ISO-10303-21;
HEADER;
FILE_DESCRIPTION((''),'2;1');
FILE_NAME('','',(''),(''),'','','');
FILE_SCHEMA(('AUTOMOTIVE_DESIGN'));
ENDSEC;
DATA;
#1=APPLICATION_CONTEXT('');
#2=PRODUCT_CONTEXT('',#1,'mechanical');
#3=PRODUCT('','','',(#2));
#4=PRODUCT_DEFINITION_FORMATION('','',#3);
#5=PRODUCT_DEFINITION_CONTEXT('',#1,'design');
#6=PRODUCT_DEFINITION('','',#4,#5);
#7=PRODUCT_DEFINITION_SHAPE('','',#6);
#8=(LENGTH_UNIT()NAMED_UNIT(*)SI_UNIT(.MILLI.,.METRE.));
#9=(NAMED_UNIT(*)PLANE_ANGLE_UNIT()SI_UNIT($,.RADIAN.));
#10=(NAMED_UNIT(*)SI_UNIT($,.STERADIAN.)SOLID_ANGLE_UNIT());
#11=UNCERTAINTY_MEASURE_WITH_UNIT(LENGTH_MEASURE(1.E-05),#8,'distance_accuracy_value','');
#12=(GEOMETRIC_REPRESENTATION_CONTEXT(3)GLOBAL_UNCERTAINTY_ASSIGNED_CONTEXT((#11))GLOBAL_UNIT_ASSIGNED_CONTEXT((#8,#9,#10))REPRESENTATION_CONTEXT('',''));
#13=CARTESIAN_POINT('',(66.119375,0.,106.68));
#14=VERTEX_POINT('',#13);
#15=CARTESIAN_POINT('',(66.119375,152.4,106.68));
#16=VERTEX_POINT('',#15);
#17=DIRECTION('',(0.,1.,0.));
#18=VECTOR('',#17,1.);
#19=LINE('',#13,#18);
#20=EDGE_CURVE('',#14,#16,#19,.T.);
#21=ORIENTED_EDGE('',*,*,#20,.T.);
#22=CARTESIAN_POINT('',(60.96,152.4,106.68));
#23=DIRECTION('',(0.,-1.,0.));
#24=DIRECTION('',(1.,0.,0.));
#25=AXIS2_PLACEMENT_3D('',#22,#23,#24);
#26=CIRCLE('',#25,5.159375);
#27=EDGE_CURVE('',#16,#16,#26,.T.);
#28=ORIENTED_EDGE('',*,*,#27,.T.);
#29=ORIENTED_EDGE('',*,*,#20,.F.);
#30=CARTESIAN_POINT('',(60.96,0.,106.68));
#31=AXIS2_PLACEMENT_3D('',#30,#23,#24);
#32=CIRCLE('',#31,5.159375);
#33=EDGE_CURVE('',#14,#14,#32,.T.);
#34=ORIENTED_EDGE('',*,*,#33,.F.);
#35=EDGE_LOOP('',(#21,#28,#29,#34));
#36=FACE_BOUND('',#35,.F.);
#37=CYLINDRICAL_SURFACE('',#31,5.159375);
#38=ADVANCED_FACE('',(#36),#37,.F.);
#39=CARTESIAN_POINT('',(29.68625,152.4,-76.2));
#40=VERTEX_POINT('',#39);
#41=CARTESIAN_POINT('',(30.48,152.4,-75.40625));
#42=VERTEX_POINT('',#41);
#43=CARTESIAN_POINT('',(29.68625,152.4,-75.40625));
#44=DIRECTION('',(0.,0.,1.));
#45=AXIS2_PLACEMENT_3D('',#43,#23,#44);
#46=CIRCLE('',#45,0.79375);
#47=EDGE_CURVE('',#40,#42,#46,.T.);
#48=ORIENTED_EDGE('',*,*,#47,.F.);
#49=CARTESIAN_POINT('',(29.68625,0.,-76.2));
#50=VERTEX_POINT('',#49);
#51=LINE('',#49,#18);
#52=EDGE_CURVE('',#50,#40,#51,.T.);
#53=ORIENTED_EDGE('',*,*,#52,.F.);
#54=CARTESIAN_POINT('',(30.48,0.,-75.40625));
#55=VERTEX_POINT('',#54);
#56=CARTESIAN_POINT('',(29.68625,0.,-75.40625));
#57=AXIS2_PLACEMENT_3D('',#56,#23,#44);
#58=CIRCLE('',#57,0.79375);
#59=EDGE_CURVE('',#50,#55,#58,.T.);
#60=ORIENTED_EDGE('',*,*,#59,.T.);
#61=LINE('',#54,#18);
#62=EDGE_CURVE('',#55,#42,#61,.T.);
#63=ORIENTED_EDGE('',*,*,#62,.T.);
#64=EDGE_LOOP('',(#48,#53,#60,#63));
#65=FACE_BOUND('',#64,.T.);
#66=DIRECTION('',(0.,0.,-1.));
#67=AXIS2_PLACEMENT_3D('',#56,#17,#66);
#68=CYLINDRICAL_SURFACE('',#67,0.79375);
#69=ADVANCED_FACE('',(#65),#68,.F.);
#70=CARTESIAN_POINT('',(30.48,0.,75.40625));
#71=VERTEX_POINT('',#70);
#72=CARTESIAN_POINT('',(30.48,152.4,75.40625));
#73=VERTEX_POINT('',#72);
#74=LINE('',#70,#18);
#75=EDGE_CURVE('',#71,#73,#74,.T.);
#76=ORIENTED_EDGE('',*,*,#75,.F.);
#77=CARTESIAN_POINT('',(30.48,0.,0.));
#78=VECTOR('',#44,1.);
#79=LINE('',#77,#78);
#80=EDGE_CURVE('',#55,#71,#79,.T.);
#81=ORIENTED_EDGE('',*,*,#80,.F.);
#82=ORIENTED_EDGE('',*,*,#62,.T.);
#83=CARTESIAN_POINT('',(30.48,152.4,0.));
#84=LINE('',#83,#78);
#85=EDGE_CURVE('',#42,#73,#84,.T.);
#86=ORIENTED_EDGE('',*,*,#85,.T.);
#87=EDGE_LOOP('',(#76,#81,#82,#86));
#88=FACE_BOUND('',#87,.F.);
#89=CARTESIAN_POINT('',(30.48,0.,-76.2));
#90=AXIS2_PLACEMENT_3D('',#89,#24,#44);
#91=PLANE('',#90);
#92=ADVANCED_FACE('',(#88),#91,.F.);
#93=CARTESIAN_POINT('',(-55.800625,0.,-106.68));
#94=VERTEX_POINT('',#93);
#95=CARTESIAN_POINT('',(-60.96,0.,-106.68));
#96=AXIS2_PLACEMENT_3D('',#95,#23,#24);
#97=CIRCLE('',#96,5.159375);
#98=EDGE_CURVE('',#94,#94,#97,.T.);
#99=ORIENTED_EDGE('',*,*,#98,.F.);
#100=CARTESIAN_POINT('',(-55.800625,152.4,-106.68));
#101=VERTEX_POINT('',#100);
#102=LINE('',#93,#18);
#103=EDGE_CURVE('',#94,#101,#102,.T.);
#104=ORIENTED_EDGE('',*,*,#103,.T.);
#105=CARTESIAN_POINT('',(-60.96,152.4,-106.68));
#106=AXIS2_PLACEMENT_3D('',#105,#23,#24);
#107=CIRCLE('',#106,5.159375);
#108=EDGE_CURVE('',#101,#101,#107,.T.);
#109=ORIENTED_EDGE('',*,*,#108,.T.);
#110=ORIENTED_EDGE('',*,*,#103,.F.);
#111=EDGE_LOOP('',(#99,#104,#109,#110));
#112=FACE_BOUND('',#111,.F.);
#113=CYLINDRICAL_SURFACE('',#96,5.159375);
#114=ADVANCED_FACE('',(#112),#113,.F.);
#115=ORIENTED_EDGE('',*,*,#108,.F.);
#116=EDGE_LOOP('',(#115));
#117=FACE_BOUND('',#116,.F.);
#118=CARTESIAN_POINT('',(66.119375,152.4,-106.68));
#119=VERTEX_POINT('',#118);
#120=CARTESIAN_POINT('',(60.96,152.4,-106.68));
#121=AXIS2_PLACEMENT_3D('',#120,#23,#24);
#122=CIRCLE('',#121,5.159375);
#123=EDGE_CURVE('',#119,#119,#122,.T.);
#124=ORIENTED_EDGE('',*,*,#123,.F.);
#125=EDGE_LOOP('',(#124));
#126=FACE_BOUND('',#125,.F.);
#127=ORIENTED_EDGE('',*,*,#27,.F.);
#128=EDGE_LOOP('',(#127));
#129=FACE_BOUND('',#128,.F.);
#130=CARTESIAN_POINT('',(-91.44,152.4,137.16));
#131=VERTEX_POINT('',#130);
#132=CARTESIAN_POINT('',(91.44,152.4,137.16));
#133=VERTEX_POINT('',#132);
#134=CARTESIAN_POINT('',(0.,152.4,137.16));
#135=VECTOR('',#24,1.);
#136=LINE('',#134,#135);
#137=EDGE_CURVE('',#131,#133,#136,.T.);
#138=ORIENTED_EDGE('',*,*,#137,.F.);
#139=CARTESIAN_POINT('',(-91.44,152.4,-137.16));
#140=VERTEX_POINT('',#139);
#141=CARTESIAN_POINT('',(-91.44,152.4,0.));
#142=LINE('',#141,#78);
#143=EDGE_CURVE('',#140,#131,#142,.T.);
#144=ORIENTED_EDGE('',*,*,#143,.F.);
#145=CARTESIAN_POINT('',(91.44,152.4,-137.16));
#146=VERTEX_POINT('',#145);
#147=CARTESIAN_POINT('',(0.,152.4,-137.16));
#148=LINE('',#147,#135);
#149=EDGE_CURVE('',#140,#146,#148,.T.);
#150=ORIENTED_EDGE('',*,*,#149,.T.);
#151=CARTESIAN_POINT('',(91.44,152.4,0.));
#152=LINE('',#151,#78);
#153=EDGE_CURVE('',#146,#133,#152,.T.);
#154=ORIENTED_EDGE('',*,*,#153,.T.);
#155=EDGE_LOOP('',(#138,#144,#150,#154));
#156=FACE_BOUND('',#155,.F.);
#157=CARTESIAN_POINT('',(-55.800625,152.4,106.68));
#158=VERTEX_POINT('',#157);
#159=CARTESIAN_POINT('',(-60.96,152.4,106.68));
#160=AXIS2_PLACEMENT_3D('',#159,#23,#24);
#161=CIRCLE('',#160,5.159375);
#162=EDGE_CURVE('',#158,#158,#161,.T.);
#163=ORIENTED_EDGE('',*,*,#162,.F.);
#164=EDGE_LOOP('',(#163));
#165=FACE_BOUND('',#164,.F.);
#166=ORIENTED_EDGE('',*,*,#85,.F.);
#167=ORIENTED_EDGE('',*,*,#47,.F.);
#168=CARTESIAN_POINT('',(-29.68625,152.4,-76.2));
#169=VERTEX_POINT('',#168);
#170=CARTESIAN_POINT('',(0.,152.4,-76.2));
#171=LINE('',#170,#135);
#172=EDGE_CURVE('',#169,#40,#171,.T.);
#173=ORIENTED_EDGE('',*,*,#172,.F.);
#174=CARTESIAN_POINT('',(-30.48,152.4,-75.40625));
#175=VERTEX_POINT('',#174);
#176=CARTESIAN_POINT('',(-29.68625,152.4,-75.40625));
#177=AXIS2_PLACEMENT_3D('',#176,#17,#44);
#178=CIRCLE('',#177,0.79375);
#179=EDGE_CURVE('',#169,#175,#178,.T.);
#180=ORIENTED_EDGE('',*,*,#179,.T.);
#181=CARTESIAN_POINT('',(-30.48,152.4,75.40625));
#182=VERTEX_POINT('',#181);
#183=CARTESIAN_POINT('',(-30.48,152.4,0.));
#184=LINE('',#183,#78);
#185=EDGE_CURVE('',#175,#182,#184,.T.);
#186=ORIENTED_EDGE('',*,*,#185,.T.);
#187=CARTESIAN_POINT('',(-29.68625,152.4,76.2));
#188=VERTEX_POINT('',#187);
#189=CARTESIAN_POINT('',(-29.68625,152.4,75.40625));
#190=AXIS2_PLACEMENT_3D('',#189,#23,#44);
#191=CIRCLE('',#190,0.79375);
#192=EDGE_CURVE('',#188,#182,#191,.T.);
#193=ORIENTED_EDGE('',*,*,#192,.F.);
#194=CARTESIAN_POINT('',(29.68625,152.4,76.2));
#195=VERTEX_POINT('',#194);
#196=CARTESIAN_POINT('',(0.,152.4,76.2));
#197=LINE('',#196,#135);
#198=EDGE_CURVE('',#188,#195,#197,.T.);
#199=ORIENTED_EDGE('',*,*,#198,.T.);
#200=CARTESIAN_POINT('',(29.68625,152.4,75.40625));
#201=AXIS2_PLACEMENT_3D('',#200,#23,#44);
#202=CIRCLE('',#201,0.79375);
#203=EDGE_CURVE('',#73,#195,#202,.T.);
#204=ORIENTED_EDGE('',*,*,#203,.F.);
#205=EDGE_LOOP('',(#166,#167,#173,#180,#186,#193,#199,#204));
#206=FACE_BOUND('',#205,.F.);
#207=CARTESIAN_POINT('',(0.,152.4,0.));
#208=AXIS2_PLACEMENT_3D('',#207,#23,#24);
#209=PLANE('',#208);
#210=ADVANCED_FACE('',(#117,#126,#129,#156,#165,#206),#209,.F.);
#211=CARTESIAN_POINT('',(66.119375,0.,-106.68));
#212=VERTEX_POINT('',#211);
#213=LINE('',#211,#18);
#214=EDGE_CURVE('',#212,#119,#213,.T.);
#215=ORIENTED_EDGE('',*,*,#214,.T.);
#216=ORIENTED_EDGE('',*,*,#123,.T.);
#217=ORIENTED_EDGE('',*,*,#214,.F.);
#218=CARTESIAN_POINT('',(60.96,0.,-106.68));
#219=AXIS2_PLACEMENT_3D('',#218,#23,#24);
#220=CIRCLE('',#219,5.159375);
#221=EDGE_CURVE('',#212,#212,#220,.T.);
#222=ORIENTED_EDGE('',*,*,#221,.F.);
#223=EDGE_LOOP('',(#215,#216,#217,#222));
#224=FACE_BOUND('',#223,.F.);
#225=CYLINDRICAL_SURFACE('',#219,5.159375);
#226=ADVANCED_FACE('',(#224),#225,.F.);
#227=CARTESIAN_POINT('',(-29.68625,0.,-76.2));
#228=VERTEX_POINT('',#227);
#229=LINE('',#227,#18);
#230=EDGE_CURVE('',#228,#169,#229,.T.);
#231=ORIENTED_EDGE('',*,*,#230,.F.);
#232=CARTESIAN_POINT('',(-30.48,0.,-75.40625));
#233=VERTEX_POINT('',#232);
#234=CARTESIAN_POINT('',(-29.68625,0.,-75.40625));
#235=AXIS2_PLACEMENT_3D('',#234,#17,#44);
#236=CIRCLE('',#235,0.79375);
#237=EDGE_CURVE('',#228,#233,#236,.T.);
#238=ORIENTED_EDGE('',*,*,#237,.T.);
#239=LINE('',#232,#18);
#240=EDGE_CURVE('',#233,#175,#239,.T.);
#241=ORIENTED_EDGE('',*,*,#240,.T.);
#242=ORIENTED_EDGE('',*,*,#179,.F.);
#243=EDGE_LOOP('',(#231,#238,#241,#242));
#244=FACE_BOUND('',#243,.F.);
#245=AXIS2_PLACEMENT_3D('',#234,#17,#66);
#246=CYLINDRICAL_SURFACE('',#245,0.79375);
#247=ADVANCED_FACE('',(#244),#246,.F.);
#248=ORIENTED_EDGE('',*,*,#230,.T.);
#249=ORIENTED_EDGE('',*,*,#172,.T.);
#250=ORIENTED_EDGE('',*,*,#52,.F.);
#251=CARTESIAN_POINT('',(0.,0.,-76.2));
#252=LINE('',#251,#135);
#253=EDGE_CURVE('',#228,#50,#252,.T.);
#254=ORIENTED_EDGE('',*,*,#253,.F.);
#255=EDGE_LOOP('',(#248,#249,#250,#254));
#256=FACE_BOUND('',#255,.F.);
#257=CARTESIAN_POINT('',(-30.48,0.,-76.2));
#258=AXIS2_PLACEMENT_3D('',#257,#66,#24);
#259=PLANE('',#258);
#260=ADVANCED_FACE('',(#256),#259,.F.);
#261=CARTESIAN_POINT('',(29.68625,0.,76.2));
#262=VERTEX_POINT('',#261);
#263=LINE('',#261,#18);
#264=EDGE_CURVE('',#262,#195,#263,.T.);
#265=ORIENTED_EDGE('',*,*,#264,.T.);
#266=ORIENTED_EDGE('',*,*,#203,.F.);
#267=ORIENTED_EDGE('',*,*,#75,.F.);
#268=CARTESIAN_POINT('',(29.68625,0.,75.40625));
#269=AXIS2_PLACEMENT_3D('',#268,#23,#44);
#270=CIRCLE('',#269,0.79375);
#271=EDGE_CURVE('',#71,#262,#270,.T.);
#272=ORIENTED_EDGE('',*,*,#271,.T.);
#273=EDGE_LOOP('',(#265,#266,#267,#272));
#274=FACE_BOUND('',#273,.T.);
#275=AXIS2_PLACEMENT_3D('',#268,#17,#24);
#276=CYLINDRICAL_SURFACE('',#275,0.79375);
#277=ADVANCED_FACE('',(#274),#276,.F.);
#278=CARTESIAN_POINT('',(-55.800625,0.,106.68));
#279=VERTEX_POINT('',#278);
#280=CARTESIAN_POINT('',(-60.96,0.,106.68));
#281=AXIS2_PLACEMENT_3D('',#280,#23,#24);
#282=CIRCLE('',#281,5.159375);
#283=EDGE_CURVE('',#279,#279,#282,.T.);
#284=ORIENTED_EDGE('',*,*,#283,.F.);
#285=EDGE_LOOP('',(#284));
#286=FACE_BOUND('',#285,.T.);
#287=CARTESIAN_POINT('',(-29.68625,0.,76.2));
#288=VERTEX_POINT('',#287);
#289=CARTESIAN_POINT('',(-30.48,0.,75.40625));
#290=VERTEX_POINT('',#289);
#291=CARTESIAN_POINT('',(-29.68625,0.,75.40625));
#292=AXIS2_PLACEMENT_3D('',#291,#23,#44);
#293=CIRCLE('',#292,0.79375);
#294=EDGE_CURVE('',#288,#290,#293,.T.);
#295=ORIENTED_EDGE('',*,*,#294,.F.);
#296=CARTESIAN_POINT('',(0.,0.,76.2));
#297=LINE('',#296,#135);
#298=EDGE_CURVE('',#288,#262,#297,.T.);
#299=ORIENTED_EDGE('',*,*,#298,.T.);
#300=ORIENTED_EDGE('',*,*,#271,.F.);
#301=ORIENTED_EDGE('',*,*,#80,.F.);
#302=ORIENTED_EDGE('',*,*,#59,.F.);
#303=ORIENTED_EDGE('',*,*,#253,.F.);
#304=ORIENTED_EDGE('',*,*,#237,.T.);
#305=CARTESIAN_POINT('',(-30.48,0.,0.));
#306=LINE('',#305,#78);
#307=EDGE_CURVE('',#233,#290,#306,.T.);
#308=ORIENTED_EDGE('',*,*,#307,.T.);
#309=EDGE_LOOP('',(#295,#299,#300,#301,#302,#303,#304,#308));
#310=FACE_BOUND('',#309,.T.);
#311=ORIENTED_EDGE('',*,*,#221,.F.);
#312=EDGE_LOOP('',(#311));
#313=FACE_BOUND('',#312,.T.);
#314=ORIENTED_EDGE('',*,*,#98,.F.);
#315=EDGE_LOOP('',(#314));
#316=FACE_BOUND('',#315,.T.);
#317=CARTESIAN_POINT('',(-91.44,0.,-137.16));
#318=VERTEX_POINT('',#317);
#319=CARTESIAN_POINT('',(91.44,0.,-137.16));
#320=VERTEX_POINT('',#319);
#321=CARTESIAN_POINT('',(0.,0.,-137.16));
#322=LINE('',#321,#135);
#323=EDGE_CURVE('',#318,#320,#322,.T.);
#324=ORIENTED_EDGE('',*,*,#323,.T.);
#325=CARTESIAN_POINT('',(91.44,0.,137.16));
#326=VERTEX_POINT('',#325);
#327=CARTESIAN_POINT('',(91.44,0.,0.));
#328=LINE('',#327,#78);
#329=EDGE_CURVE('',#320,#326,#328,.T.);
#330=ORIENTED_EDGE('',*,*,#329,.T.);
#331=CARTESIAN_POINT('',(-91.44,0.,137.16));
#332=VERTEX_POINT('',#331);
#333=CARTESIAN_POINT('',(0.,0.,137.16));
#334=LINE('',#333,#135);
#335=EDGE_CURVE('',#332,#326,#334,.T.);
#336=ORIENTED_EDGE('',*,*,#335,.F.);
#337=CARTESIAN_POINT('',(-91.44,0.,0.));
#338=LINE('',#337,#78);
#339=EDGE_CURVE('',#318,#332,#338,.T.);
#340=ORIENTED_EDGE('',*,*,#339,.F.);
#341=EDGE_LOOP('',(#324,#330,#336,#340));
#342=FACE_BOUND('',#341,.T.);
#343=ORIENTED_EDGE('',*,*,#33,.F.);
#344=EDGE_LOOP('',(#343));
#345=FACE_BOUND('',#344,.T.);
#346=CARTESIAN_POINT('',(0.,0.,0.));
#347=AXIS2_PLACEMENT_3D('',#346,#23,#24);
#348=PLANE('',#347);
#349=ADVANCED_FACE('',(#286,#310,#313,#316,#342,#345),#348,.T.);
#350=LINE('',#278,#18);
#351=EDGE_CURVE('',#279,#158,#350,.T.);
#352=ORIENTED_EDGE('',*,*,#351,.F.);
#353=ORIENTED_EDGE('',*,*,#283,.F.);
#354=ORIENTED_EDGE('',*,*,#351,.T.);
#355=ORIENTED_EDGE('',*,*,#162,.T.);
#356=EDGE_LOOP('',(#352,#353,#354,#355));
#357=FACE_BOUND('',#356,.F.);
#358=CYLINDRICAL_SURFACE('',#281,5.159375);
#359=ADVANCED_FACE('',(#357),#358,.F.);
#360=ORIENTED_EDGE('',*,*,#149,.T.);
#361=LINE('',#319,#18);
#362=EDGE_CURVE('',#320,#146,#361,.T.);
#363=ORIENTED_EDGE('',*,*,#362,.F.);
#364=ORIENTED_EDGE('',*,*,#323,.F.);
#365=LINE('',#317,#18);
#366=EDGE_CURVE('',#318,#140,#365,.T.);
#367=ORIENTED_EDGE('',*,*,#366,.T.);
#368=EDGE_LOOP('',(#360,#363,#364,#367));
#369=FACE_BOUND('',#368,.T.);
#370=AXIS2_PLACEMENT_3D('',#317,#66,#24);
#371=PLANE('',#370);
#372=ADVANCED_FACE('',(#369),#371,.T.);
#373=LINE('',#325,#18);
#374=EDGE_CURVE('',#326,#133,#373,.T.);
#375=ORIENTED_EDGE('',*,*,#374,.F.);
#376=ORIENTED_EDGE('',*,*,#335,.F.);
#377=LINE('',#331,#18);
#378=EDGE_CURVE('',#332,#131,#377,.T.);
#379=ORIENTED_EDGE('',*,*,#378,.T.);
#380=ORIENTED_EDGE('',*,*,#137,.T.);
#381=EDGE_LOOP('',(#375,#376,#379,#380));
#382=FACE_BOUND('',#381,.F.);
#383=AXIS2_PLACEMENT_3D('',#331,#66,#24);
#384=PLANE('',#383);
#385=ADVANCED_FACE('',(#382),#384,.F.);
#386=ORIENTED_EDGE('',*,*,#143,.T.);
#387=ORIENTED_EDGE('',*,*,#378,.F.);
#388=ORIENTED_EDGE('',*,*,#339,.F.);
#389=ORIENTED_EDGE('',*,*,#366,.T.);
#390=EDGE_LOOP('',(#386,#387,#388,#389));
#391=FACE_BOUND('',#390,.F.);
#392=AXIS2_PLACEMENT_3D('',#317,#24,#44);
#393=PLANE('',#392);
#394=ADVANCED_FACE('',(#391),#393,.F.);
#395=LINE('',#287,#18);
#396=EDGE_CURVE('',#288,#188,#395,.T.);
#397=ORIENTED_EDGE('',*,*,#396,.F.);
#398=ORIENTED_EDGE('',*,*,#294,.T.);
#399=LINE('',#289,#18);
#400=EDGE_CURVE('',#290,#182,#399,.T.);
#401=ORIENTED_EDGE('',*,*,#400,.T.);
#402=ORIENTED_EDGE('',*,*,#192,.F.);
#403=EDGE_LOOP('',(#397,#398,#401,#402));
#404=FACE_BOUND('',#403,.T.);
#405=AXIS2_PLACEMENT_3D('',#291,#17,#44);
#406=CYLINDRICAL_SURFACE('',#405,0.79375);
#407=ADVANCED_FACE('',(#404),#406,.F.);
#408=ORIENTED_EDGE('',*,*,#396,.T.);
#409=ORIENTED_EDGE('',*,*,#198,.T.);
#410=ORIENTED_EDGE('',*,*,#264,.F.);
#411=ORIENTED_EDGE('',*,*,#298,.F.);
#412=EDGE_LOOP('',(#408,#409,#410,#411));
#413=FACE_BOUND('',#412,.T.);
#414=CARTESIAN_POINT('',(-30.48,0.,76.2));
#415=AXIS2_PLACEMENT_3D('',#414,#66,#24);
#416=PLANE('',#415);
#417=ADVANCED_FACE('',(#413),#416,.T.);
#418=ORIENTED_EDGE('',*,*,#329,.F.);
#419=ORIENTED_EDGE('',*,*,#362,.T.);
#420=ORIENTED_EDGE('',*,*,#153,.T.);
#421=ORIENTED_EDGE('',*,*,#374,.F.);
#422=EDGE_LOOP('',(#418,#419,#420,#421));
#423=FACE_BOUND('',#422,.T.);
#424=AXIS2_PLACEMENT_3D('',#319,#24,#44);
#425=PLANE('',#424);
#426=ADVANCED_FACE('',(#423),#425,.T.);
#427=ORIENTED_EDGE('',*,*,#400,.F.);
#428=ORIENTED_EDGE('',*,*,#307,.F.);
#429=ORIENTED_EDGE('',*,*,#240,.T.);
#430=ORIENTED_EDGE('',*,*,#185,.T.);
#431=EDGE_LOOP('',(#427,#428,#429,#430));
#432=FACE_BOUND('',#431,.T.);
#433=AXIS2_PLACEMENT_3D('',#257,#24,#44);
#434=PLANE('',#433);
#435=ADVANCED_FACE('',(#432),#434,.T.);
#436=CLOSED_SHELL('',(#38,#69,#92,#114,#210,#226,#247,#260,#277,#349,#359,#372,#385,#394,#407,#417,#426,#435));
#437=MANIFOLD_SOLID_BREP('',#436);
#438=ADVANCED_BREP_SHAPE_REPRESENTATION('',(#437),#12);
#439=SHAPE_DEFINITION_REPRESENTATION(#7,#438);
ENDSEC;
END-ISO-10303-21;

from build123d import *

# Parameters (mm, degrees)
F2_W     = 182.88
F2_H     = 274.32
F3_DEPTH = 152.4
F4_R     = 5.159375
F5_DEPTH = 152.4
F6_W     = 60.96
F6_H     = 152.4
F7_DEPTH = 152.4
F8_R     = 0.79375


with BuildPart() as f3:
    # F2 (on Front) → F3 (new body)
    with BuildSketch(Plane.XZ):
        Rectangle(F2_W, F2_H)
    extrude(amount=-F3_DEPTH)

    # F4 (on face) → F5 (cut)
    with BuildSketch(Plane.XZ):
        with Locations((-60.96, 106.68)):
            Circle(F4_R)
        with Locations((60.96, 106.68)):
            Circle(F4_R)
        with Locations((-60.96, -106.68)):
            Circle(F4_R)
        with Locations((60.96, -106.68)):
            Circle(F4_R)
    extrude(amount=-F5_DEPTH, mode=Mode.SUBTRACT)

    # F6 (on face) → F7 (cut)
    with BuildSketch(Plane.XZ):
        Rectangle(F6_W, F6_H)
    extrude(amount=-F7_DEPTH, mode=Mode.SUBTRACT)

    # F8
    f8_edges = [f3.edges().sort_by_distance(p)[0] for p in [
        (-30.48, 76.2, 76.2),
        (30.48, 76.2, 76.2),
        (30.48, 76.2, -76.2),
        (-30.48, 76.2, -76.2),
    ]]
    fillet(f8_edges, radius=F8_R)


solid = f3.part
